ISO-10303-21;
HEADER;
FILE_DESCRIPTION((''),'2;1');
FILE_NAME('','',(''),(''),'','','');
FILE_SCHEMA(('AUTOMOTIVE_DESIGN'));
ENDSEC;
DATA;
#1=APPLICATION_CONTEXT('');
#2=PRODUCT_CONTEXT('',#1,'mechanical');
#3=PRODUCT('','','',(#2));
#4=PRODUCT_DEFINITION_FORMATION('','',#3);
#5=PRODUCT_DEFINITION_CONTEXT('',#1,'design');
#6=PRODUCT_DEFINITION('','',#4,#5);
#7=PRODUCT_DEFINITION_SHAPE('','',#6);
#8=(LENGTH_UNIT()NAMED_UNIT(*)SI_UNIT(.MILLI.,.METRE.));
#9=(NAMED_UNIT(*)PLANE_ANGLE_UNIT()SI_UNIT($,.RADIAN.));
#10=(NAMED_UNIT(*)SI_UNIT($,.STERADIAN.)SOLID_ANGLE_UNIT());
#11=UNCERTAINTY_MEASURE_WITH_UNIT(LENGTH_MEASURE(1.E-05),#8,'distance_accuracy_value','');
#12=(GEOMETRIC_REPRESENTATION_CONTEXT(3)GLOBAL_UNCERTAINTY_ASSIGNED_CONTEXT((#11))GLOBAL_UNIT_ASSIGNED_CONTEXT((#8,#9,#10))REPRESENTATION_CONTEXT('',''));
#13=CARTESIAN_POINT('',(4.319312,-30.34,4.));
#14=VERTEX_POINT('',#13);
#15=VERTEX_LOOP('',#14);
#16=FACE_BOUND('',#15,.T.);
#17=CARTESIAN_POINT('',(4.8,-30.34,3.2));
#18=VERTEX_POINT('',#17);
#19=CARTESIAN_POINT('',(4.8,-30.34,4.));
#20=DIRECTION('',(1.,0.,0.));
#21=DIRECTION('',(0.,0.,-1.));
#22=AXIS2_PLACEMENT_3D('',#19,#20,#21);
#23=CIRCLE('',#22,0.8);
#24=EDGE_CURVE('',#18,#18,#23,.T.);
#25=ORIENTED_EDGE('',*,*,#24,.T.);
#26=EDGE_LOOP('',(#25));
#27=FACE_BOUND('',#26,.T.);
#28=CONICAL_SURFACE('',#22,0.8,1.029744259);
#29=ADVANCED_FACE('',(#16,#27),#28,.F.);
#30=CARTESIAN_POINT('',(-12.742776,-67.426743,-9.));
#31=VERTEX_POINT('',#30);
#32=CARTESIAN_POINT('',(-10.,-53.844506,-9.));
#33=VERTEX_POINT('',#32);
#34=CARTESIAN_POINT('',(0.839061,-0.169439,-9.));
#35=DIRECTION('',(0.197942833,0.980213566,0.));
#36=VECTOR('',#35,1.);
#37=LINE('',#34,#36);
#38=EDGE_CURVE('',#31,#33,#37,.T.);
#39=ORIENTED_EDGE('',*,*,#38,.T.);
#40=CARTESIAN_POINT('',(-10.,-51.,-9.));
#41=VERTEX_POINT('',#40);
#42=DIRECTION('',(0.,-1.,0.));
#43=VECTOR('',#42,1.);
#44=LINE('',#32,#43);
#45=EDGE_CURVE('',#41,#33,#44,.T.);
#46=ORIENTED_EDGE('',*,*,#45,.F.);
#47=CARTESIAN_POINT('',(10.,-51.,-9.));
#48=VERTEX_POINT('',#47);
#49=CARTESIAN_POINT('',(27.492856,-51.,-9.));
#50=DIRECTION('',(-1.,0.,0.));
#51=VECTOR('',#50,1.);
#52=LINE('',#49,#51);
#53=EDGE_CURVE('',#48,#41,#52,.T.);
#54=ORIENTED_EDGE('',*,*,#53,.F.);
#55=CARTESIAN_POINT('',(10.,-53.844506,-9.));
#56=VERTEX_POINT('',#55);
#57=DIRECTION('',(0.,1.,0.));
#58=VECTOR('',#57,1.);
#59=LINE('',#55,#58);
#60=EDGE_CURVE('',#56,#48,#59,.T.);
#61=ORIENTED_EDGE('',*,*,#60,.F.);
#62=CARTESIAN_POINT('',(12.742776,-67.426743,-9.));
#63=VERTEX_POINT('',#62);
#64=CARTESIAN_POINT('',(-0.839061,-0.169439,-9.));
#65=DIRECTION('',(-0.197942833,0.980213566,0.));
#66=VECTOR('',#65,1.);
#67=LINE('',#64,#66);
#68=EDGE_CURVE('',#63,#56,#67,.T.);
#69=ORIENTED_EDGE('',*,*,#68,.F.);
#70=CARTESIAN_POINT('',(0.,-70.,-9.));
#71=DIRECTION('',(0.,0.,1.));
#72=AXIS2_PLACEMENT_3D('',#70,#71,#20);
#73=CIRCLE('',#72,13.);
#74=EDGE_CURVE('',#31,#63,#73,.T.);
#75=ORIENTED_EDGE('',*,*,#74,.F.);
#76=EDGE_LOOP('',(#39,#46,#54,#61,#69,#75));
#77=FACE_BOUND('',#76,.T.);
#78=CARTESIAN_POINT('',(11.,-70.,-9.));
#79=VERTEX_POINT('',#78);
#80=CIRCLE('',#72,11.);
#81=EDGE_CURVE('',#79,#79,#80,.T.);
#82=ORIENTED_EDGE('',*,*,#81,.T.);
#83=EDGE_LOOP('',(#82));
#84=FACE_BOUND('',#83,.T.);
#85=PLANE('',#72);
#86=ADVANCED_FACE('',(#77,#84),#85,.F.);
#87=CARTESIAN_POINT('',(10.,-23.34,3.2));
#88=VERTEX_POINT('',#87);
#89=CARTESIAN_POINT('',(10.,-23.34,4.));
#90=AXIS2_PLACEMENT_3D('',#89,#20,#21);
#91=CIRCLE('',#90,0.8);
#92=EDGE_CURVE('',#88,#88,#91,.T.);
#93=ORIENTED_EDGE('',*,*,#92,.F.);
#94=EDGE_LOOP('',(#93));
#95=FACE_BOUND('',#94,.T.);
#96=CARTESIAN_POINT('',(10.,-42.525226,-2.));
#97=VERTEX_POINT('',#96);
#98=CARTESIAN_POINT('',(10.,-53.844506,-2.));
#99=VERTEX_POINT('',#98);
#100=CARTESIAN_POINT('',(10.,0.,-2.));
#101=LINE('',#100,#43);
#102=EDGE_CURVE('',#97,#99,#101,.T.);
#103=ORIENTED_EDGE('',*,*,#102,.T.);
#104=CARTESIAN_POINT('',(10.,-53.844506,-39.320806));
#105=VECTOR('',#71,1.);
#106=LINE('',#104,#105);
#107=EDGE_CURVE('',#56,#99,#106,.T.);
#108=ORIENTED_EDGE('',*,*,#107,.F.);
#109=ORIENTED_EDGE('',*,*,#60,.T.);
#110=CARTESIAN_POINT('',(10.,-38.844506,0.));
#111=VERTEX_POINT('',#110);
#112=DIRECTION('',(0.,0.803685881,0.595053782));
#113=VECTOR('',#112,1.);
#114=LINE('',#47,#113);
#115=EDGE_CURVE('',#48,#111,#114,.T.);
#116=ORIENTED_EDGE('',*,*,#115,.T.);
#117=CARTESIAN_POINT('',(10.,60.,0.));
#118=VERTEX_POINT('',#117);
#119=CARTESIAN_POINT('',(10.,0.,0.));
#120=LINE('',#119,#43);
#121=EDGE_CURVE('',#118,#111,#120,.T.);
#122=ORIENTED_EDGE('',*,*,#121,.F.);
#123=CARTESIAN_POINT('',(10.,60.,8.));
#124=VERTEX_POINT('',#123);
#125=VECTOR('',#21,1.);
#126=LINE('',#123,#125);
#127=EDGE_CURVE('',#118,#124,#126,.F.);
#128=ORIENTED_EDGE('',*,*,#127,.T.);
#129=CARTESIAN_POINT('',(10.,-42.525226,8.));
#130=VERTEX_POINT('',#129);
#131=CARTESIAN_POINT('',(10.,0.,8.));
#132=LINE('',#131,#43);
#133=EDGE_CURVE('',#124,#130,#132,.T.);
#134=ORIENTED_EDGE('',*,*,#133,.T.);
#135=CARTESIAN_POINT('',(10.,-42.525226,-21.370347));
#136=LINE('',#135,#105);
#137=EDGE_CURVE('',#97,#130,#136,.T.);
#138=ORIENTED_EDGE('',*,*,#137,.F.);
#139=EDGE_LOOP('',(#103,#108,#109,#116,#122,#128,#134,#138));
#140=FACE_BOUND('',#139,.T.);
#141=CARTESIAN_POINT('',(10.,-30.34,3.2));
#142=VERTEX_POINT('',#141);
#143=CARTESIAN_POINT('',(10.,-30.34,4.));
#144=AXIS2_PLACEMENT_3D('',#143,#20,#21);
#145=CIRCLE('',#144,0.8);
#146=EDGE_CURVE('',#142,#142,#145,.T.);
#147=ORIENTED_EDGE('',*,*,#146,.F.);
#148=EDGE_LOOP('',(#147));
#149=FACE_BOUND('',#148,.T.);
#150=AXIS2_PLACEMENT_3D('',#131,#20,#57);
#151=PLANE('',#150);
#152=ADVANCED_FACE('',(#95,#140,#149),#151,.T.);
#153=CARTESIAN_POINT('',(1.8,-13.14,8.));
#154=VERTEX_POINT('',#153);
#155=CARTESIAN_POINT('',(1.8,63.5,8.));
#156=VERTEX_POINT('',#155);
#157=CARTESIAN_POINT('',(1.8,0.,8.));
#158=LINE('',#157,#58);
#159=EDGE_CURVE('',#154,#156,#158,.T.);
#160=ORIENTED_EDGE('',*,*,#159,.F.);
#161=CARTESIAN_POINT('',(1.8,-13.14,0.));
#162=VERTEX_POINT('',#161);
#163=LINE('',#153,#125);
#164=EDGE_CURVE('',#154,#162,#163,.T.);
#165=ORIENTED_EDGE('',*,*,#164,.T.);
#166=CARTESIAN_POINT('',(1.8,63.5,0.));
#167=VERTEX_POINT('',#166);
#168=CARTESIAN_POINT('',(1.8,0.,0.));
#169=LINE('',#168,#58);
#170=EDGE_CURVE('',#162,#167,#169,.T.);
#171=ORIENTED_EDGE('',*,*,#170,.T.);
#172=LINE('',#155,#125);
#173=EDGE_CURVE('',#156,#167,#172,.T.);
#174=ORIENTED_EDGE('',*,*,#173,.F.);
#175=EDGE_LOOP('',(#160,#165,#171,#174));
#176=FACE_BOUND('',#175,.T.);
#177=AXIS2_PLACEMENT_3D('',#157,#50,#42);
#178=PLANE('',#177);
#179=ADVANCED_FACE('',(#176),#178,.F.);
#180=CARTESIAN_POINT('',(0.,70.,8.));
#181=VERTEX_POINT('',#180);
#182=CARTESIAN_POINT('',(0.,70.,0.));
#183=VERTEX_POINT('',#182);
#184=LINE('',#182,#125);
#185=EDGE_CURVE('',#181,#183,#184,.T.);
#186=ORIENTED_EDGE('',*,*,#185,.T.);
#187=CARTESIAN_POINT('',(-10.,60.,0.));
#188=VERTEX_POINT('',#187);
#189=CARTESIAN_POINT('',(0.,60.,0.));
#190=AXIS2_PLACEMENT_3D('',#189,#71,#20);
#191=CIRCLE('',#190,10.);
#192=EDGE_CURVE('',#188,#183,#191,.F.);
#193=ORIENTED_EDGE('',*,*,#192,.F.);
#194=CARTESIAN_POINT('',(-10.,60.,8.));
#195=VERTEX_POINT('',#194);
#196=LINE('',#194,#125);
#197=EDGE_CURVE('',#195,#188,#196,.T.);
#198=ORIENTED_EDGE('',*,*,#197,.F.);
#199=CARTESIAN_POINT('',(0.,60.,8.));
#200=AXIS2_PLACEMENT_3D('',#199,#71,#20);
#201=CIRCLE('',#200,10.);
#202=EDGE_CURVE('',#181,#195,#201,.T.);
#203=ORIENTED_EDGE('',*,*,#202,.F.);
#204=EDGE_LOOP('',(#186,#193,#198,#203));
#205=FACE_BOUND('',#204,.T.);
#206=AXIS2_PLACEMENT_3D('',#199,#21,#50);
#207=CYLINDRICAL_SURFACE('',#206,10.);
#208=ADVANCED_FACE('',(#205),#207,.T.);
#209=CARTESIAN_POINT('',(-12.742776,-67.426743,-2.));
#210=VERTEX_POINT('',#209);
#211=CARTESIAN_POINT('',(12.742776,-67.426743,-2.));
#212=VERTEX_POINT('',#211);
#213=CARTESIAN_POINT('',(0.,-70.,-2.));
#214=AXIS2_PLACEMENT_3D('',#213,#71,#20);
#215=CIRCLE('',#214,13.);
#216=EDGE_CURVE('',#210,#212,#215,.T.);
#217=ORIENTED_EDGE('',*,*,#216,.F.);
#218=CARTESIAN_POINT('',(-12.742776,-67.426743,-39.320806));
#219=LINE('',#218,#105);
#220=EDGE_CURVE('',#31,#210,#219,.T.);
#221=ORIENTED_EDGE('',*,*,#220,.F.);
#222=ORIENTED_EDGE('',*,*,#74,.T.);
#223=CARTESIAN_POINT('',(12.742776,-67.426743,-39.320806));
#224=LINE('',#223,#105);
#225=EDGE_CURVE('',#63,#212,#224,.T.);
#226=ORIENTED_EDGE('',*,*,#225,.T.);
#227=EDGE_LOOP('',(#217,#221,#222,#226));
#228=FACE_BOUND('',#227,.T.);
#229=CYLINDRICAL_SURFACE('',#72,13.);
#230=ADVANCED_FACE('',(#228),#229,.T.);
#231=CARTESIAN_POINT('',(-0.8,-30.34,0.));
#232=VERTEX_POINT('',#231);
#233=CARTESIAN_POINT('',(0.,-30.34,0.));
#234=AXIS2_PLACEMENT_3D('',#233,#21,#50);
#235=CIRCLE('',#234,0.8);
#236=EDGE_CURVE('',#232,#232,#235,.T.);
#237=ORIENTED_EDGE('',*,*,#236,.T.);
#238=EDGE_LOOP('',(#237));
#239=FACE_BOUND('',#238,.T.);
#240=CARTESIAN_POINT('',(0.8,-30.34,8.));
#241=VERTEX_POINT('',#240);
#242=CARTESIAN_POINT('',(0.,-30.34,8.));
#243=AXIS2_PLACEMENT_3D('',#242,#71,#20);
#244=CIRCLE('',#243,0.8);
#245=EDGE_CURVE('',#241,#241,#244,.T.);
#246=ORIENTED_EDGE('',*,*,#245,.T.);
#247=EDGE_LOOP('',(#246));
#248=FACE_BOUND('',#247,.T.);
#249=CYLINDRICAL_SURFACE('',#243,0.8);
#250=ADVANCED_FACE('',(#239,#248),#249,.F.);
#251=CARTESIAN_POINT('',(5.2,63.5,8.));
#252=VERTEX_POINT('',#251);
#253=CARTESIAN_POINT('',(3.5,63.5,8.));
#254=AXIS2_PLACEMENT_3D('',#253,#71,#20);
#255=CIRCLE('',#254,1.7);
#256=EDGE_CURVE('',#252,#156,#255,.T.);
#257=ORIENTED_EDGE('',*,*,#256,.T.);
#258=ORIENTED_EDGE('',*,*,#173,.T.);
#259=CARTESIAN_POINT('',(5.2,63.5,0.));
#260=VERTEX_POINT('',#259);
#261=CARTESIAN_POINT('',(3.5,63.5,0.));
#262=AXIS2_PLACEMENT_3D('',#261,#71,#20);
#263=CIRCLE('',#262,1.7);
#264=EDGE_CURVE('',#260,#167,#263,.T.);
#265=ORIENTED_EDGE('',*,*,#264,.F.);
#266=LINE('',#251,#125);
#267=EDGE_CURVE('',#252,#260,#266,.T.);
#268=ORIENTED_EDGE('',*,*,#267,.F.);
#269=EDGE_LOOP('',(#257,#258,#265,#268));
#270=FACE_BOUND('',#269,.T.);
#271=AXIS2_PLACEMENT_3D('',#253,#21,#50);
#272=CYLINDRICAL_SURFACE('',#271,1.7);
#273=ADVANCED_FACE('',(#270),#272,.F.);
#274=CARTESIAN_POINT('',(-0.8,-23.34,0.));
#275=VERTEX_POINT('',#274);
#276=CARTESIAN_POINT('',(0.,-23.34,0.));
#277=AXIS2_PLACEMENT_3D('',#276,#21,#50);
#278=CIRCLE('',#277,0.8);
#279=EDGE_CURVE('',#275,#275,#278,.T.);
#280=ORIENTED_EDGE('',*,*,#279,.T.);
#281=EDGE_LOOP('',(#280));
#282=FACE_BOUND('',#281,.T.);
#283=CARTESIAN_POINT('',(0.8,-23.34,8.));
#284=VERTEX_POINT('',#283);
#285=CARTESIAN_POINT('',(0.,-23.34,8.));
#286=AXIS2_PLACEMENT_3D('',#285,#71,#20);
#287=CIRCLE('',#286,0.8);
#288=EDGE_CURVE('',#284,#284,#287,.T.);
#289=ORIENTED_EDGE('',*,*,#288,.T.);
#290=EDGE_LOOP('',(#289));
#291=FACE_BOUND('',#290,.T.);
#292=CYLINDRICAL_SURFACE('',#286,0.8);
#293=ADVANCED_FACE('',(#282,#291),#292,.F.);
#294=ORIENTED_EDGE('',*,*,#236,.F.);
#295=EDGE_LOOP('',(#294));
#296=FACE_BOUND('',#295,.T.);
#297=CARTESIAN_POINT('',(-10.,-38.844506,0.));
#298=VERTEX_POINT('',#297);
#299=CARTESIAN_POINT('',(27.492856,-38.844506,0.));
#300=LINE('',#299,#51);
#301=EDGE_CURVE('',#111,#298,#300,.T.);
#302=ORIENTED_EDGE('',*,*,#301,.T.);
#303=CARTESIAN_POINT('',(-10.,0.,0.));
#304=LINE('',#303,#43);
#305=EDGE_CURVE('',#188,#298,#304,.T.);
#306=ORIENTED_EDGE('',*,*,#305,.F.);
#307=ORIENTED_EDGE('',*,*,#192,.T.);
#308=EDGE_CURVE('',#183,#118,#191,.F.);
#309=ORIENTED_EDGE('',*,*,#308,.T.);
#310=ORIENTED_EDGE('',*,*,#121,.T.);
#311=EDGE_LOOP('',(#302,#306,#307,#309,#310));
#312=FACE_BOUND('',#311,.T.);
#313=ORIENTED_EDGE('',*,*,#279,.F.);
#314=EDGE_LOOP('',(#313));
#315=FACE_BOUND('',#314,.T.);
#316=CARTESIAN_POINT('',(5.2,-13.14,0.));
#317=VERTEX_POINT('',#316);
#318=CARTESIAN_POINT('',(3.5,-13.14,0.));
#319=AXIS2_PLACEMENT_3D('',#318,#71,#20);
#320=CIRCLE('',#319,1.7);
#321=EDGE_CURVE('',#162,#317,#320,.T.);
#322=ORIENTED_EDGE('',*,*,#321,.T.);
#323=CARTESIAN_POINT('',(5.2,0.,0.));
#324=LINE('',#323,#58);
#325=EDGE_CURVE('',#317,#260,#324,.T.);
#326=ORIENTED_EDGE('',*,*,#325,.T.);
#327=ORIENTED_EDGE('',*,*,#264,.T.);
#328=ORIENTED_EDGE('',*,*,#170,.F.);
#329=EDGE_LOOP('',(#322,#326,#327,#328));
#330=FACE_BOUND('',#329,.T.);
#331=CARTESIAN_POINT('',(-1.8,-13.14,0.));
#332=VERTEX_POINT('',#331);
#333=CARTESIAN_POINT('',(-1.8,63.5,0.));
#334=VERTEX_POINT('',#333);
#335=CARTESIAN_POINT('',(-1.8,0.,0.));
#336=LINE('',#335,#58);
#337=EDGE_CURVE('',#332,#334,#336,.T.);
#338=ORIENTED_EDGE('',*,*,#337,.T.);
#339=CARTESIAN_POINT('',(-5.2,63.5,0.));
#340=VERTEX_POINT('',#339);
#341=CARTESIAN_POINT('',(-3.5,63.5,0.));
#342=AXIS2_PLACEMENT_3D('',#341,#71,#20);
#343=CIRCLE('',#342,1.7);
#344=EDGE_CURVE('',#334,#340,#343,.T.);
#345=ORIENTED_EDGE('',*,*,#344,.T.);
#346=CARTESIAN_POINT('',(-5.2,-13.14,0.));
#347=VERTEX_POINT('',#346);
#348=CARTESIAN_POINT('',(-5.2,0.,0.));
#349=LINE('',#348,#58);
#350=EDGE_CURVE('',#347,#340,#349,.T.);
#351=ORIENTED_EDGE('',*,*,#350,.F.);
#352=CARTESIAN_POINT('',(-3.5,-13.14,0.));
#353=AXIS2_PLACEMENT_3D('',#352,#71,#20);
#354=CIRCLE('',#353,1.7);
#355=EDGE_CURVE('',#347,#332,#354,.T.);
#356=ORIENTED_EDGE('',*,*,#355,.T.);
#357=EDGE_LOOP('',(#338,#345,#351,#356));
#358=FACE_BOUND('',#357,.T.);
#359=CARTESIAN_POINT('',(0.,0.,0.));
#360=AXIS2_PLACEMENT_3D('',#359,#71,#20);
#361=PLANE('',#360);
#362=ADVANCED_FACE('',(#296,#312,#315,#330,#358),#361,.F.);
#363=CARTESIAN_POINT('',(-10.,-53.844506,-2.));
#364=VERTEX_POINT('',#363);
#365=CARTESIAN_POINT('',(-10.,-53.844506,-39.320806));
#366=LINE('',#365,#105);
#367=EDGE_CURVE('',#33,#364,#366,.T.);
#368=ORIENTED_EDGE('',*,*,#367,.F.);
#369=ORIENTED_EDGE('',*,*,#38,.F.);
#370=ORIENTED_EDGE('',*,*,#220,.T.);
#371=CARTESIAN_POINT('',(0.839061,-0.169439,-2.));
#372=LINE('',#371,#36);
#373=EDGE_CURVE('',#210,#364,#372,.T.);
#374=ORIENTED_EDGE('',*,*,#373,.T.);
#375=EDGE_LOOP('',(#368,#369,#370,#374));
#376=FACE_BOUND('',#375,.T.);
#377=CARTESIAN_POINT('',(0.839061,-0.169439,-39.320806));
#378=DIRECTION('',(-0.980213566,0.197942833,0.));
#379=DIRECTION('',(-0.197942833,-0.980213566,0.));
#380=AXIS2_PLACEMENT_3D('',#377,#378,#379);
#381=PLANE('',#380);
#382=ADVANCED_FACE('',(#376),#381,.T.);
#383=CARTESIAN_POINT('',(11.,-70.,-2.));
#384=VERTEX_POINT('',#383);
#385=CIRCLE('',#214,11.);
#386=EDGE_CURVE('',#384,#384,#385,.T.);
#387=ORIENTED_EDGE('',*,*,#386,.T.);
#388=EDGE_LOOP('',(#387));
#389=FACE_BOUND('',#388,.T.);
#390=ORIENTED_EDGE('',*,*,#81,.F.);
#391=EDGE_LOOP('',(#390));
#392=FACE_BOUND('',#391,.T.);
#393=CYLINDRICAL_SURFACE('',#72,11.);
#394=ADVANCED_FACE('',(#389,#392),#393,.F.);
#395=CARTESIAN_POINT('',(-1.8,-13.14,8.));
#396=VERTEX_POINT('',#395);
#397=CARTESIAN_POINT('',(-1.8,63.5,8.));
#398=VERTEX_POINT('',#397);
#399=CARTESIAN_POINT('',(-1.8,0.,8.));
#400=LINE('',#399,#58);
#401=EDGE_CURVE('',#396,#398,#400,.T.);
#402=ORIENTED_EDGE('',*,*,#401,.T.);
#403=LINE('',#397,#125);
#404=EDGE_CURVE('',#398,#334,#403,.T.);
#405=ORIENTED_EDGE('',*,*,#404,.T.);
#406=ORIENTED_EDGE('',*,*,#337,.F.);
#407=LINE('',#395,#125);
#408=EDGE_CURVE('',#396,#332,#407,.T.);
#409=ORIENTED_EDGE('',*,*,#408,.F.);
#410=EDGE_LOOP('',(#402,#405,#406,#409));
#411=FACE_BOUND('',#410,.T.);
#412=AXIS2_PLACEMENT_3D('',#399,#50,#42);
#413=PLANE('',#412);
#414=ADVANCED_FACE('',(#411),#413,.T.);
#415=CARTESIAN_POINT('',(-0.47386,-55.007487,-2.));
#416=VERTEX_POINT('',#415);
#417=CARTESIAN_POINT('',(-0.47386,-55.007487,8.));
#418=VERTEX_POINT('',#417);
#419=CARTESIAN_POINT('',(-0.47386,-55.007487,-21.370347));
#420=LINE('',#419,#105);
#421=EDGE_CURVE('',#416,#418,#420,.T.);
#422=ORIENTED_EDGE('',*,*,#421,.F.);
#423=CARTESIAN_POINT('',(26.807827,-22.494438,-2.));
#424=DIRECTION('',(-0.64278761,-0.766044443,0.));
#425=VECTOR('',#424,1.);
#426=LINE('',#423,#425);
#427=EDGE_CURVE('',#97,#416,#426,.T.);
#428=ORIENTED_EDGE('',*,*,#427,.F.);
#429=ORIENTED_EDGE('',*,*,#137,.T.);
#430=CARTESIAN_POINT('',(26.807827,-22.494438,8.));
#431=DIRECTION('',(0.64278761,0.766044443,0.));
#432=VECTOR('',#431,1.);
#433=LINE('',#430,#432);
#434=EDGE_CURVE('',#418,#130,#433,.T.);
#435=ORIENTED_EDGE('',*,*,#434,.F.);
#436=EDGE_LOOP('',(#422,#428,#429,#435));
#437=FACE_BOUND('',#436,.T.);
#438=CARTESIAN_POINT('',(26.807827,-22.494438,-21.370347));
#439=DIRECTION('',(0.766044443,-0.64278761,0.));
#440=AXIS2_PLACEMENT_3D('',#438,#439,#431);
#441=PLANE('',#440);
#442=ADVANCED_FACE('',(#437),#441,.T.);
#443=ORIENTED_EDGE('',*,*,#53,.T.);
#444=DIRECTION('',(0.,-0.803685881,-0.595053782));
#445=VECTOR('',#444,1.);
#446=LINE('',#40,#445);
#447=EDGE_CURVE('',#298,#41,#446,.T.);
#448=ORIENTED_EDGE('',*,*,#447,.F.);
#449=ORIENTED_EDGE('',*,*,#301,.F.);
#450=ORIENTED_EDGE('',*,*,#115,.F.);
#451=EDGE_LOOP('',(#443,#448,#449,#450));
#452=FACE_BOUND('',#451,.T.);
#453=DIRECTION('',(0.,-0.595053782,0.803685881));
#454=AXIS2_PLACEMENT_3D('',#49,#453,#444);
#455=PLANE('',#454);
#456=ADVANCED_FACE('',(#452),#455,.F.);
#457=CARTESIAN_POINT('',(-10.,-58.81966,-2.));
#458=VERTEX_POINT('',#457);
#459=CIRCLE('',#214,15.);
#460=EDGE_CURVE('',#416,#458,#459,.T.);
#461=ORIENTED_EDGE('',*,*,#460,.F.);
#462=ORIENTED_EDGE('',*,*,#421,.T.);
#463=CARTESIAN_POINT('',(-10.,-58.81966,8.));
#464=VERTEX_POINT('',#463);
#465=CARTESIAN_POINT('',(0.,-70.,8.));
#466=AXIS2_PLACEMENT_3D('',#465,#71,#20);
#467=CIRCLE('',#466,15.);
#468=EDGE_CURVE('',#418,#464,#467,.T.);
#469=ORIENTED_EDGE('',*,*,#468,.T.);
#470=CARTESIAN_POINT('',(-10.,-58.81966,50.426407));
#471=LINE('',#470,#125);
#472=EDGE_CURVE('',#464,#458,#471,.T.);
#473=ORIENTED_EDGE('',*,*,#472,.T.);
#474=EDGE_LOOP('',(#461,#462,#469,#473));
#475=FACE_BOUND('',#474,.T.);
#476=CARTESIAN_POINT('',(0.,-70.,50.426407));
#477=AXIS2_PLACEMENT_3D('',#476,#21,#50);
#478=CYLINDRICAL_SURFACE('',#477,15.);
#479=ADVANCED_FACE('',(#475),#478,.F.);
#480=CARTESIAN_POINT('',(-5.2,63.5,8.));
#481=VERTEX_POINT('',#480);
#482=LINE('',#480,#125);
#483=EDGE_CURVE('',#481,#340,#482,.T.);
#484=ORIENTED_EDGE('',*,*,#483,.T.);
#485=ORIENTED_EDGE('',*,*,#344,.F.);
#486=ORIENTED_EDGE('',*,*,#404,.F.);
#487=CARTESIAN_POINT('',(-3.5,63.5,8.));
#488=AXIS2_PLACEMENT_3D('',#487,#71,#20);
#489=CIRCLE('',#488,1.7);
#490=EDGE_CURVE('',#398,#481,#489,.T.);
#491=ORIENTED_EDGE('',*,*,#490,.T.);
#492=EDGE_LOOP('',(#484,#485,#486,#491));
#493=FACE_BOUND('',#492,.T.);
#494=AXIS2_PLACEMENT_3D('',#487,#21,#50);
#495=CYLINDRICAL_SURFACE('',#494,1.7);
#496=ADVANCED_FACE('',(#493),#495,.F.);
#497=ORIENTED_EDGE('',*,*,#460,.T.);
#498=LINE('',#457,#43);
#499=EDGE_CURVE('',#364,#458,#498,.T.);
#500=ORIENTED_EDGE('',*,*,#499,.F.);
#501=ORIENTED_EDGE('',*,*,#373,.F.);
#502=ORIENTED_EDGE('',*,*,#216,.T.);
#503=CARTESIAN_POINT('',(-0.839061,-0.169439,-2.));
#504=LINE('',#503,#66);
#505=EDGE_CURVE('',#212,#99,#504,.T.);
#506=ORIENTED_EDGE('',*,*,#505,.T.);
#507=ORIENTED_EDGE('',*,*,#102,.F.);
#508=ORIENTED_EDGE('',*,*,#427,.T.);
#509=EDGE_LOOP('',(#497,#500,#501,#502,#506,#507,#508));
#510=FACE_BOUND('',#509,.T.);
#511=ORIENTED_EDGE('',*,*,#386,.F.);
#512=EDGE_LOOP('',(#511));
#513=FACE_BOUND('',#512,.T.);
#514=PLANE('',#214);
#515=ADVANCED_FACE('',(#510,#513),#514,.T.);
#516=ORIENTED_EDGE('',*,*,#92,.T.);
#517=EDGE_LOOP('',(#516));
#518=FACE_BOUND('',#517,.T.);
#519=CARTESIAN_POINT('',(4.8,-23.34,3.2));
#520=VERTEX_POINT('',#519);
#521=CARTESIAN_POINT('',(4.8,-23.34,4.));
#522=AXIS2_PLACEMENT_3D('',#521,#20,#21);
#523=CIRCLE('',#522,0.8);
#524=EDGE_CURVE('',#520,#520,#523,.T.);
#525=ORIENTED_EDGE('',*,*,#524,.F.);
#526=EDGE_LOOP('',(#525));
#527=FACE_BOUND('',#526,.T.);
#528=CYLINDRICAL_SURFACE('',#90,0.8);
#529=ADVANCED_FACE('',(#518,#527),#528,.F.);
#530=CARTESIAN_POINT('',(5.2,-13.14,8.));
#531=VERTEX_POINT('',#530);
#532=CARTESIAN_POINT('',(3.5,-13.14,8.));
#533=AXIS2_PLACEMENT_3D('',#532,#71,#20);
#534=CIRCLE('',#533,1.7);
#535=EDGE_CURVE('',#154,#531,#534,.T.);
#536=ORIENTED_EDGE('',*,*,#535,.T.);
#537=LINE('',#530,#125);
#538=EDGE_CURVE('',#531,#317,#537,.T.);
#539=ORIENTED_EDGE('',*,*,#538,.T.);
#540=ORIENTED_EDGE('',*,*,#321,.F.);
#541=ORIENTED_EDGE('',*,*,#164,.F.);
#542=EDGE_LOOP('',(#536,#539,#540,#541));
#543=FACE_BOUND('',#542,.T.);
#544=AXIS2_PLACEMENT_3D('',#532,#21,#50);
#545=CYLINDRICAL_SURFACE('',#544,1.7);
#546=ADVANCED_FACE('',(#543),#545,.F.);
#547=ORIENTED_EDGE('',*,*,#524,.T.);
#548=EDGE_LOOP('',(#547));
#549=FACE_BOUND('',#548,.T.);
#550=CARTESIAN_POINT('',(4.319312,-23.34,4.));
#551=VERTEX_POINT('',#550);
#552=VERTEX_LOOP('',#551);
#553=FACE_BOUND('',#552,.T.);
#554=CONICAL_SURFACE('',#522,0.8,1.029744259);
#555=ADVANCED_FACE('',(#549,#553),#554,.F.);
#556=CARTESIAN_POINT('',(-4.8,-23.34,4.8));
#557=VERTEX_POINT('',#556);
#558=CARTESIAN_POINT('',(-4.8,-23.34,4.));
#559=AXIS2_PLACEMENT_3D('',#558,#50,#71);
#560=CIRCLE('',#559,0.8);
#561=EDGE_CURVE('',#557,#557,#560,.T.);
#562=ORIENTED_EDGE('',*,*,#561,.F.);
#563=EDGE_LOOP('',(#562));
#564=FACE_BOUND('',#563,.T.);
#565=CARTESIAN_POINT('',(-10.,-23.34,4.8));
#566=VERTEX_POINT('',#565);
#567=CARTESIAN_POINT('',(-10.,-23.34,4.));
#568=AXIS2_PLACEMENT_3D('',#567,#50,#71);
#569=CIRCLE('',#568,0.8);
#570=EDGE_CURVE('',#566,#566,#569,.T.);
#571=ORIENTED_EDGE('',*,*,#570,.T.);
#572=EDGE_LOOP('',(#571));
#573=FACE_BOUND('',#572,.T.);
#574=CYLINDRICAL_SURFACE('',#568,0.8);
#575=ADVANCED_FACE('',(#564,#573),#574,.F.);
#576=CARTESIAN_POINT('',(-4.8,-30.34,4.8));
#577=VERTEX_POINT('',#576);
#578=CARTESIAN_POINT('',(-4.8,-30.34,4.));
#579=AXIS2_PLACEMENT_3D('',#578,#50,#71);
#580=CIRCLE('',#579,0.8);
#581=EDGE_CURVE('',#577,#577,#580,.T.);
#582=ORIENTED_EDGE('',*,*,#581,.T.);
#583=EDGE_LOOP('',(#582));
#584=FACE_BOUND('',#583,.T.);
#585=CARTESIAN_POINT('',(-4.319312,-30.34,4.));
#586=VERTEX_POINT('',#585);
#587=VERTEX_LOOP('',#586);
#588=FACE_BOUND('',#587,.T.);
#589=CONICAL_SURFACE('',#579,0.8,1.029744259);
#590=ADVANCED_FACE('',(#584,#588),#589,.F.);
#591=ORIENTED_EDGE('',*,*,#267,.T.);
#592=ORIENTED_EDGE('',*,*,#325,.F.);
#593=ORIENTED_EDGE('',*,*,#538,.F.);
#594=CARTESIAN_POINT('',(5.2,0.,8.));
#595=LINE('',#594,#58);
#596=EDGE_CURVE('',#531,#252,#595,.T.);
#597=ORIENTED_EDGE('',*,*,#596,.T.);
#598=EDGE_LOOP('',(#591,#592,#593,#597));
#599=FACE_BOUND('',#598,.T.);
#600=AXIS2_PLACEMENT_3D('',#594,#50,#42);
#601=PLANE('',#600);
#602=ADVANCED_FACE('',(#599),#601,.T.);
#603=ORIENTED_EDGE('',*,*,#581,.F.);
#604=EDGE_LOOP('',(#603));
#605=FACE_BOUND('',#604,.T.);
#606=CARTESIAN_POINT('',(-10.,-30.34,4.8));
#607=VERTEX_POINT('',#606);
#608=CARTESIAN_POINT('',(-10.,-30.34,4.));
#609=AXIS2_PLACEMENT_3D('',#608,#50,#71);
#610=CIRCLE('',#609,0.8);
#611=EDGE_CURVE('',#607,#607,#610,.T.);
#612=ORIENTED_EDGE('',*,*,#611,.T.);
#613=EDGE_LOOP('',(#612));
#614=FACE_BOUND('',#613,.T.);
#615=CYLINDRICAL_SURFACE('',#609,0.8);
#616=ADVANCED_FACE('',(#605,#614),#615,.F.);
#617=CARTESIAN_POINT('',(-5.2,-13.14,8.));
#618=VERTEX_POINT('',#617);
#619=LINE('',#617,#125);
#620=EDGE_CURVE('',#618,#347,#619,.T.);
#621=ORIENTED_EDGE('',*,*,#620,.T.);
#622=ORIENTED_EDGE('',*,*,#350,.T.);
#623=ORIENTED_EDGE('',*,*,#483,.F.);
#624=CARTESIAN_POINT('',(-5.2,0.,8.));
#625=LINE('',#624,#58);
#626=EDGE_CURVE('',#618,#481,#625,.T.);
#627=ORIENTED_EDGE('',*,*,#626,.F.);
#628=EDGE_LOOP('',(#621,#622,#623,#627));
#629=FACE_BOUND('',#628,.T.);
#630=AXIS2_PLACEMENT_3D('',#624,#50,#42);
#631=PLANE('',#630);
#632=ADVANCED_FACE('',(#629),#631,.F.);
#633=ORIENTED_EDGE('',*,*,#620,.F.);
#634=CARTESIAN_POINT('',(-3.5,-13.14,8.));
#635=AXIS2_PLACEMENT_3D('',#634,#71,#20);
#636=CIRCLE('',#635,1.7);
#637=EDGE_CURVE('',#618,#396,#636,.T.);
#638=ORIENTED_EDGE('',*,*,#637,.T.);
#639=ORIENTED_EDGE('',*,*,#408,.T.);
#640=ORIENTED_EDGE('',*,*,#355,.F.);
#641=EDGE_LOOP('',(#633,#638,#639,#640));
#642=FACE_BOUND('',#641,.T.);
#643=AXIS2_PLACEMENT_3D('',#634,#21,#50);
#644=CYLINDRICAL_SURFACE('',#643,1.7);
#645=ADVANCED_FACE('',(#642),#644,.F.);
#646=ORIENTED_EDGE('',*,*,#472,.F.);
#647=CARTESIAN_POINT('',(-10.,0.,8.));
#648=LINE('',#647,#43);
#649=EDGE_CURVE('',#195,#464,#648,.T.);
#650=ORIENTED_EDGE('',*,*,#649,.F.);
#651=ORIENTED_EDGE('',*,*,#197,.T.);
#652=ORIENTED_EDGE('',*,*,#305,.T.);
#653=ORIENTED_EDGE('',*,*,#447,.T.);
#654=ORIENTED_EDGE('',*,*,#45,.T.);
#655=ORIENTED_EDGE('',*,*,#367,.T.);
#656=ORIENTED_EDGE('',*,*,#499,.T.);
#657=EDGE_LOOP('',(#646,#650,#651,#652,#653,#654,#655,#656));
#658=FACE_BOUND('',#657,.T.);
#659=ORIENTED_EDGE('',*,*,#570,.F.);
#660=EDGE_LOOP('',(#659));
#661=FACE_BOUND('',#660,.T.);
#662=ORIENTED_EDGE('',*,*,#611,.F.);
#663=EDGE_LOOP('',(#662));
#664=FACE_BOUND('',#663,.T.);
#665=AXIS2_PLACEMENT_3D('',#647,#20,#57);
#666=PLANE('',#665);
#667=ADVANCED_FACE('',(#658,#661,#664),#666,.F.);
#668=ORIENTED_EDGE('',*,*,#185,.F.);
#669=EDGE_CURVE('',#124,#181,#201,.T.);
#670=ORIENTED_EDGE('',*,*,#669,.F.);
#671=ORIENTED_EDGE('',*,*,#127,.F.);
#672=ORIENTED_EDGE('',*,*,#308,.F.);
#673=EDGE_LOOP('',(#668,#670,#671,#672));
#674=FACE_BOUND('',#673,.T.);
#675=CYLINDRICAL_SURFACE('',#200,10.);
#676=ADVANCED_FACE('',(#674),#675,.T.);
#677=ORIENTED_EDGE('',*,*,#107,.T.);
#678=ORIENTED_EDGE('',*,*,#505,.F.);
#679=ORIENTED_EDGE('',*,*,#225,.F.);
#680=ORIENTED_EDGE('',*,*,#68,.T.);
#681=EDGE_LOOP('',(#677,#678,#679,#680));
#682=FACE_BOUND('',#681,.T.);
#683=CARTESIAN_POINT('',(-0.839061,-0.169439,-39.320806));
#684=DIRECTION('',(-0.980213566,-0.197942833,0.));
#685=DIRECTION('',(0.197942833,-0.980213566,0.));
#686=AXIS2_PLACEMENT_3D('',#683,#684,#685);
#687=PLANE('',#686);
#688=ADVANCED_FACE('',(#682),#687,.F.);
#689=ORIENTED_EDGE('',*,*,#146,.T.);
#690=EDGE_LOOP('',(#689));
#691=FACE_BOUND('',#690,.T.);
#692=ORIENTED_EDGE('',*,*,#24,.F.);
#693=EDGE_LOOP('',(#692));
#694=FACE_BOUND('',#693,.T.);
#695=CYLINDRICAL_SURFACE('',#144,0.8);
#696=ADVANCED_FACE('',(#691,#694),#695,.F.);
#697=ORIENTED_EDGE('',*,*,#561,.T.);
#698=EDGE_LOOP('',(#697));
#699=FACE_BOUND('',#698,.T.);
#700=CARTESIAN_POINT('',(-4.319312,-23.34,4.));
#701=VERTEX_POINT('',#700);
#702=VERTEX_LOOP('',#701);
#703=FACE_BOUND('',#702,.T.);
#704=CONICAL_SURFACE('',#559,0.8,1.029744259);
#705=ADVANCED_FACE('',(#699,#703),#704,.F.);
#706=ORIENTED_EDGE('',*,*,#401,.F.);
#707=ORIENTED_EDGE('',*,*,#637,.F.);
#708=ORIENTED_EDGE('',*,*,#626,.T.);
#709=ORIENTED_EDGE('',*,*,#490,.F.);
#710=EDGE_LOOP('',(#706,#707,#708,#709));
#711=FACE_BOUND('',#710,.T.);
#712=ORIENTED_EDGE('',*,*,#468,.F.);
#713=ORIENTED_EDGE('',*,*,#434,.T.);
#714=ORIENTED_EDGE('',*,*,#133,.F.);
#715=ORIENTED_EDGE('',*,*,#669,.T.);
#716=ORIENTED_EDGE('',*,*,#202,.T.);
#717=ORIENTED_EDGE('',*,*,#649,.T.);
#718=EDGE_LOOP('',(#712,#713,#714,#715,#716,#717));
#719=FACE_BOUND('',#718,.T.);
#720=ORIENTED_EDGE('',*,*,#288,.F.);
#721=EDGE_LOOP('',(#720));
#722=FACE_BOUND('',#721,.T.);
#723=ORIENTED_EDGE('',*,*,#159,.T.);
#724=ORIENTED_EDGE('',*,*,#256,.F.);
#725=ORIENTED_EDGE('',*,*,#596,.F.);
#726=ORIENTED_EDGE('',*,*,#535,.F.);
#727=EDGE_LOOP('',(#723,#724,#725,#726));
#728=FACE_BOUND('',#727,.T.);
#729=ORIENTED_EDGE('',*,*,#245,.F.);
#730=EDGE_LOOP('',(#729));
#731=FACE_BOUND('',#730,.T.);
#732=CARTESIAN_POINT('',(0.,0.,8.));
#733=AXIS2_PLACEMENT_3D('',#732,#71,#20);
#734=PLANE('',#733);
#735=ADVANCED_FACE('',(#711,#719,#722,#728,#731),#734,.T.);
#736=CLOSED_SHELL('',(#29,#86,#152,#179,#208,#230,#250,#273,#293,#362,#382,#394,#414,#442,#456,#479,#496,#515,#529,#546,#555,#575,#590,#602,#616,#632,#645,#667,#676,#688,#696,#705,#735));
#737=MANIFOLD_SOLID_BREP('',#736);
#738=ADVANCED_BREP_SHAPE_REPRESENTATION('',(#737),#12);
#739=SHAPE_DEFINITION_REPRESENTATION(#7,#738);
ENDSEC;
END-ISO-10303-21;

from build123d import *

# Parameters (mm, degrees)
SKETCH1_W                             = 140
SKETCH1_H                             = 20
BOSS_EXTRUDE1_DEPTH                   = 8
FILLET1_R                             = 10
TOP_SCREW_HOLES_AT_2_COUNT            = 2
TOP_SCREW_HOLES_AT_2_PITCH            = 7
SIDE_SCREW_HOLES_AT_2_COUNT           = 2
SIDE_SCREW_HOLES_AT_2_PITCH           = 7
BOSS_EXTRUDE2_START                   = -6
SKETCH23_R                            = 13
SKETCH23_R_2                          = 11
BOSS_EXTRUDE2_DEPTH                   = 7
CUT_EXTRUDE1_DEPTH                    = 4.5
CUT_EXTRUDE1_DEPTH_BACK               = 4.5
SKETCH23_4_R                          = 11
CUT_EXTRUDE2_START                    = -4
SKETCH23_5_R                          = 13
SKETCH23_5_R_2                        = 11
CUT_EXTRUDE2_DEPTH                    = 8
BOSS_EXTRUDE7_DEPTH                   = 9
CUT_EXTRUDE3_DEPTH                    = 11
CUT_EXTRUDE4_START                    = -2
CUT_EXTRUDE4_DEPTH                    = 2
BOSS_EXTRUDE3_START                   = -13
SKETCH24_R                            = 4
BOSS_EXTRUDE3_DEPTH                   = 9
BOSS_EXTRUDE4_START                   = -8
SKETCH25_R                            = 13
BOSS_EXTRUDE4_DEPTH                   = 8
SKETCH34_R                            = 5
BOSS_EXTRUDE9_DEPTH                   = 4
SKETCH39_R                            = 5
SKETCH39_R_2                          = 1.7
BOSS_EXTRUDE10_DEPTH                  = 2
BODY_MOVE_COPY1_OUTLINE_R             = 0.8
BODY_MOVE_COPY1_DEPTH                 = 3.1999999
BODY_MOVE_COPY1_START                 = 4.8000001
BODY_MOVE_COPY1_2_OUTLINE_R           = 0.8
BODY_MOVE_COPY1_2_DEPTH               = 3.1999999
BODY_MOVE_COPY1_START_2               = -9
BODY_MOVE_COPY1_3_OUTLINE_R           = 11
BODY_MOVE_COPY1_3_DEPTH               = 7
BODY_MOVE_COPY1_START_3               = -2
BODY_MOVE_COPY1_4_DEPTH               = 10
BODY_MOVE_COPY1_START_4               = 3.1999999
BODY_MOVE_COPY1_5_OUTLINE_R           = 0.8
BODY_MOVE_COPY1_5_DEPTH               = 1.6000002
CUT_EXTRUDE5_DEPTH                    = 9
BOSS_EXTRUDE11_DEPTH                  = 8
BOSS_EXTRUDE13_REACH                  = 87.012
BOSS_EXTRUDE13_DIRECTION_2_REACH      = 87.012
CUT_EXTRUDE6_DEPTH                    = 2.6
CUT_EXTRUDE7_START                    = -10
CUT_EXTRUDE7_DEPTH                    = 10
BODY_MOVE_COPY3_ANGLE                 = 170
BOSS_EXTRUDE14_REACH                  = 212.931
SKETCH46_W                            = 8.790313744
SKETCH46_H                            = 8
BOSS_EXTRUDE14_DIRECTION_2_REACH      = 212.931
BOSS_EXTRUDE14_DIRECTION_2_END_RADIUS = 13
BODY_MOVE_COPY4_ANGLE                 = 10


with BuildPart() as part:
    # Sketch1 → Boss-Extrude1 (new body)
    with BuildSketch(Plane(origin=(0, 0, 0), x_dir=(0, 1, 0), z_dir=(0, 0, 1))):
        Rectangle(SKETCH1_W, SKETCH1_H)
        with BuildLine():
            Line((-13.14, 5.2), (63.5, 5.2))
            ThreePointArc((63.5, 5.2), (65.2, 3.5), (63.5, 1.8))
            Line((63.5, 1.8), (-13.14, 1.8))
            ThreePointArc((-13.14, 1.8), (-14.84, 3.5), (-13.14, 5.2))
        make_face(mode=Mode.SUBTRACT)
        with BuildLine():
            Line((-13.14, -1.8), (63.5, -1.8))
            ThreePointArc((63.5, -1.8), (65.2, -3.5), (63.5, -5.2))
            Line((63.5, -5.2), (-13.14, -5.2))
            ThreePointArc((-13.14, -5.2), (-14.84, -3.5), (-13.14, -1.8))
        make_face(mode=Mode.SUBTRACT)
    extrude(amount=BOSS_EXTRUDE1_DEPTH)

    # Fillet1
    fillet1_edges = [part.edges().sort_by_distance(p)[0] for p in [
        (-10, 70, 4),
        (10, 70, 4),
    ]]
    fillet(fillet1_edges, radius=FILLET1_R - 0.0001)  # a hair under: the kernel refuses the full size

    # Sketch19 → Top - Screw Holes (revolve, cut)
    with BuildSketch(Plane(origin=(0, -23.34, 8), x_dir=(0, -1, 0), z_dir=(1, 0, 0))):
        Polygon((0, 0), (0, 5.680688495), (0.8, 5.2), (0.8, 0), align=None)
    top_screw_holes = revolve(axis=Axis((0, -23.34, 14.35), (0, 0, -1)), mode=Mode.SUBTRACT)

    # Top - Screw Holes at 2: Top - Screw Holes ×2
    with Locations(*[(0, -i * TOP_SCREW_HOLES_AT_2_PITCH, 0) for i in range(1, TOP_SCREW_HOLES_AT_2_COUNT)]):
        add(top_screw_holes, mode=Mode.SUBTRACT)

    # Sketch21 → Side - Screw Holes (revolve, cut)
    with BuildSketch(Plane(origin=(-10, -23.34, 4), x_dir=(0, 0, 1), z_dir=(0, 1, 0))):
        Polygon((0, 0), (0, 5.680688495), (0.8, 5.2), (0.8, 0), align=None)
    side_screw_holes = revolve(axis=Axis((-16.35, -23.34, 4), (1, 0, 0)), mode=Mode.SUBTRACT)

    # Side - Screw Holes at 2: Side - Screw Holes ×2
    with Locations(*[(0, -i * SIDE_SCREW_HOLES_AT_2_PITCH, 0) for i in range(1, SIDE_SCREW_HOLES_AT_2_COUNT)]):
        add(side_screw_holes, mode=Mode.SUBTRACT)

    # Mirror1: Side - Screw Holes across plane
    add(side_screw_holes.mirror(Plane(origin=(0, 0, 0), x_dir=(0, 0, 1), z_dir=(1, 0, 0))), mode=Mode.SUBTRACT)

    # Mirror1 copy 1 sketch → Mirror1 copy 1 (revolve, cut)
    with BuildSketch(Plane(origin=(10, -30.34, 4), x_dir=(0, 0, 1), z_dir=(0, 1, 0))):
        Polygon((0, 0), (0, -5.680688495), (0.8, -5.2), (0.8, 0), align=None)
    revolve(axis=Axis((16.35, -30.34, 4), (1, 0, 0)), mode=Mode.SUBTRACT)

    # Mirror2: Top - Screw Holes across plane
    add(top_screw_holes.mirror(Plane.XY.offset(4)), mode=Mode.SUBTRACT)

    # Mirror2 copy 1 sketch → Mirror2 copy 1 (revolve, cut)
    with BuildSketch(Plane(origin=(0, -30.34, 0), x_dir=(0, -1, 0), z_dir=(1, 0, 0))):
        Polygon((0, 0), (0, -5.680688495), (0.8, -5.2), (0.8, 0), align=None)
    revolve(axis=Axis((0, -30.34, -6.35), (0, 0, -1)), mode=Mode.SUBTRACT)

    # Sketch23<4> → Cut-Extrude1 (cut, two sides: drawn at the far end of the back side and taken through both)
    with BuildSketch(Plane(origin=(0, 0, 4), x_dir=(0, -1, 0), z_dir=(0, 0, 1)).offset(-CUT_EXTRUDE1_DEPTH_BACK)):
        with Locations(Location((70, 0, 0), (0, 0, 90))):
            Circle(SKETCH23_4_R)
    extrude(amount=CUT_EXTRUDE1_DEPTH + CUT_EXTRUDE1_DEPTH_BACK, mode=Mode.SUBTRACT)

    # Sketch23<5> → Cut-Extrude2 (cut)
    with BuildSketch(Plane(origin=(0, 0, 4), x_dir=(0, -1, 0), z_dir=(0, 0, 1)).offset(CUT_EXTRUDE2_START)):
        with Locations(Location((70, 0, 0), (0, 0, 90))):
            Circle(SKETCH23_5_R)
        with Locations(Location((70, 0, 0), (0, 0, 90))):
            Circle(SKETCH23_5_R_2, mode=Mode.SUBTRACT)
    extrude(amount=CUT_EXTRUDE2_DEPTH, mode=Mode.SUBTRACT)



with BuildPart() as body_2:
    # Sketch23 → Boss-Extrude2 (new body)
    with BuildSketch(Plane(origin=(0, 0, 4), x_dir=(0, -1, 0), z_dir=(0, 0, 1)).offset(BOSS_EXTRUDE2_START)):
        with Locations(Location((70, 0, 0), (0, 0, 90))):
            Circle(SKETCH23_R)
        with Locations(Location((70, 0, 0), (0, 0, 90))):
            Circle(SKETCH23_R_2, mode=Mode.SUBTRACT)
    extrude(amount=-BOSS_EXTRUDE2_DEPTH)


with BuildPart() as part_1:
    add(part.part)

    add(body_2.part)  # Boss-Extrude7 merges body 2
    # Sketch29 → Boss-Extrude7 (add)
    with BuildSketch(Plane(origin=(0, 0, 0), x_dir=(1, 0, 0), z_dir=(0, 0, -1))):
        with BuildLine():
            ThreePointArc((-10, 53.844505579), (0, 51), (10, 53.844505579))
            Line((10, 53.844505579), (10, 61.693376137))
            ThreePointArc((10, 61.693376137), (0, 57), (-10, 61.693376137))
            Line((-10, 61.693376137), (-10, 53.844505579))
        make_face()
        with BuildLine():
            Line((-12.742776356, 67.426743165), (-10, 53.844505579))
            Line((-10, 53.844505579), (-10, 61.693376137))
            ThreePointArc((-10, 61.693376137), (-11.727162635, 64.389861273), (-12.742776356, 67.426743165))
        make_face()
        with BuildLine():
            Line((10, 61.693376137), (10, 53.844505579))
            Line((10, 53.844505579), (12.742776356, 67.426743165))
            ThreePointArc((12.742776356, 67.426743165), (11.727162635, 64.389861273), (10, 61.693376137))
        make_face()
    extrude(amount=BOSS_EXTRUDE7_DEPTH)

    # Cut-Extrude3: read off the stored shape, not the designer's step
    # Cut-Extrude3 outline → Cut-Extrude3 (cut)
    with BuildSketch(Plane.XY.offset(-2)):
        with BuildLine():
            ThreePointArc((11.261507826, -60.091496507), (0, -55), (-11.261507826, -60.091496507))
            Line((-11.261507826, -60.091496507), (-12.742776356, -67.426743165))
            ThreePointArc((-12.742776356, -67.426743165), (0, -57), (12.742776356, -67.426743165))
            Line((12.742776356, -67.426743165), (11.261507826, -60.091496507))
        make_face()
    extrude(amount=CUT_EXTRUDE3_DEPTH, mode=Mode.SUBTRACT)

    # Sketch30 → Cut-Extrude4 (cut)
    with BuildSketch(Plane.XY.offset(CUT_EXTRUDE4_START)):
        with BuildLine():
            Line((-10, -58.819660113), (-10, -53.844505579))
            Line((-10, -53.844505579), (-11.261507826, -60.091496507))
            ThreePointArc((-11.261507826, -60.091496507), (-10.649756838, -59.436729707), (-10, -58.819660113))
        make_face()
        with BuildLine():
            Line((11.261507826, -60.091496507), (10, -53.844505579))
            Line((10, -53.844505579), (10, -58.819660113))
            ThreePointArc((10, -58.819660113), (10.649756838, -59.436729707), (11.261507826, -60.091496507))
        make_face()
    extrude(amount=CUT_EXTRUDE4_DEPTH, mode=Mode.SUBTRACT)

    # Boss-Extrude13: up to this face of the body (flat: up to its plane)
    boss_extrude13_end = Plane(part_1.part.faces().sort_by_distance((10, 0.113380243, 3.94798514))[0])
    # Sketch43 → Boss-Extrude13 (add, up to the picked face)
    with BuildSketch(Plane.YZ, mode=Mode.PRIVATE) as boss_extrude13_sk1:
        Polygon((-51, -9), (-38.844505579, 0), (-51, 0), (-53.844505579, 0), (-53.844505579, -9), align=None)
    boss_extrude13_tool1 = split(extrude(boss_extrude13_sk1.sketch, amount=BOSS_EXTRUDE13_REACH, mode=Mode.PRIVATE), bisect_by=boss_extrude13_end, keep=Keep.BOTH, mode=Mode.PRIVATE)
    add(boss_extrude13_tool1.solids().sort_by(Axis((0, -48.693363, -3.478215), (1, 0, 0)))[0])

    # Boss-Extrude13 direction 2: up to this face of the body (flat: up to its plane)
    boss_extrude13_direction_2_end = Plane(part_1.part.faces().sort_by_distance((-10, 0.113380243, 3.94798514))[0])
    # Sketch43 → Boss-Extrude13 direction 2 (add, up to the picked face)
    with BuildSketch(Plane.YZ, mode=Mode.PRIVATE) as boss_extrude13_direction_2_sk1:
        Polygon((-51, -9), (-38.844505579, 0), (-51, 0), (-53.844505579, 0), (-53.844505579, -9), align=None)
    boss_extrude13_direction_2_tool1 = split(extrude(boss_extrude13_direction_2_sk1.sketch, amount=-BOSS_EXTRUDE13_DIRECTION_2_REACH, mode=Mode.PRIVATE), bisect_by=boss_extrude13_direction_2_end, keep=Keep.BOTH, mode=Mode.PRIVATE)
    add(boss_extrude13_direction_2_tool1.solids().sort_by(Axis((0, -48.693363, -3.478215), (-1, 0, 0)))[0])

    # Sketch45 → Cut-Extrude7 (cut)
    with BuildSketch(Plane.XY.offset(8).offset(CUT_EXTRUDE7_START)):
        with BuildLine():
            Line((10, -42.525225805), (-0.473860479, -55.00748666))
            ThreePointArc((-0.473860479, -55.00748666), (5.13030215, -55.904610688), (10, -58.819660113))
            Line((10, -58.819660113), (10, -42.525225805))
        make_face()
    extrude(amount=CUT_EXTRUDE7_DEPTH, mode=Mode.SUBTRACT)


with BuildPart() as body_2_2:
    # Sketch24 → Boss-Extrude3 (new body)
    with BuildSketch(Plane(origin=(0, 0, 4), x_dir=(0, -1, 0), z_dir=(0, 0, 1)).offset(BOSS_EXTRUDE3_START)):
        with Locations(Location((70, 0, 0), (0, 0, 90))):
            Circle(SKETCH24_R)
    extrude(amount=BOSS_EXTRUDE3_DEPTH)

    # Sketch25 → Boss-Extrude4 (add)
    with BuildSketch(Plane(origin=(0, 0, 0), x_dir=(1, 0, 0), z_dir=(0, 0, -1)).offset(BOSS_EXTRUDE4_START)):
        with Locations(Location((0, 70, 0), (0, 0, 180))):
            Circle(SKETCH25_R)
    extrude(amount=BOSS_EXTRUDE4_DEPTH)


with BuildPart() as body_3:
    # Sketch34 → Boss-Extrude9 (new body)
    with BuildSketch(Plane(origin=(0, 0, -9), x_dir=(1, 0, 0), z_dir=(0, 0, -1))):
        with Locations(Location((0, 70, 0), (0, 0, 180))):
            Circle(SKETCH34_R)
    extrude(amount=BOSS_EXTRUDE9_DEPTH)


with BuildPart() as csk_for_m3_countersunk_flat_head_screw1_tool:
    # Sketch38 → CSK for M3 Countersunk Flat Head Screw1 (revolve)
    with BuildSketch(Plane(origin=(0, -70, -13), x_dir=(0, 1, 0), z_dir=(1, 0, 0))):
        Polygon((0, 0), (0, 21), (1.7, 21), (1.7, 1.45), (3.15, 0), align=None)
    revolve(axis=Axis((0, -70, -19.35), (0, 0, 1)))


with BuildPart() as body_2_2_1:
    add(body_2_2.part)

    # CSK for M3 Countersunk Flat Head Screw1: cut by csk_for_m3_countersunk_flat_head_screw1_tool
    add(csk_for_m3_countersunk_flat_head_screw1_tool.part, mode=Mode.SUBTRACT)

    # Sketch39 → Boss-Extrude10 (add)
    with BuildSketch(Plane(origin=(0, 0, 0), x_dir=(1, 0, 0), z_dir=(0, 0, -1))):
        with Locations(Location((0, 70, 0), (0, 0, 180))):
            Circle(SKETCH39_R)
        with Locations(Location((0, 70, 0), (0, 0, 180))):
            Circle(SKETCH39_R_2, mode=Mode.SUBTRACT)
    extrude(amount=BOSS_EXTRUDE10_DEPTH)



with BuildPart() as body_3_1:
    add(body_3.part)

    # CSK for M3 Countersunk Flat Head Screw1: cut by csk_for_m3_countersunk_flat_head_screw1_tool
    add(csk_for_m3_countersunk_flat_head_screw1_tool.part, mode=Mode.SUBTRACT)


with BuildPart() as body_4:
    # Body-Move/Copy1: read off the stored shape, not the designer's step
    # Body-Move/Copy1 outline → Body-Move/Copy1 (new body)
    with BuildSketch(Plane.XY):
        with BuildLine():
            Line((10, -58.819660113), (10, 60))
            ThreePointArc((10, 60), (7.071067812, 67.071067812), (0, 70))
            ThreePointArc((0, 70), (-7.071067812, 67.071067812), (-10, 60))
            Line((-10, 60), (-10, -58.819660113))
            ThreePointArc((-10, -58.819660113), (0, -55), (10, -58.819660113))
        make_face()
        with BuildLine():
            ThreePointArc((1.8, 63.5), (3.5, 65.2), (5.2, 63.5))
            Line((5.2, 63.5), (5.2, -13.14))
            ThreePointArc((5.2, -13.14), (3.5, -14.84), (1.8, -13.14))
            Line((1.8, -13.14), (1.8, 63.5))
        make_face(mode=Mode.SUBTRACT)
        with Locations((0, -30.34)):
            Circle(BODY_MOVE_COPY1_OUTLINE_R, mode=Mode.SUBTRACT)
        with Locations((0, -23.34)):
            Circle(BODY_MOVE_COPY1_OUTLINE_R, mode=Mode.SUBTRACT)
        with BuildLine():
            Line((-5.2, -13.14), (-5.2, 63.5))
            ThreePointArc((-5.2, 63.5), (-3.5, 65.2), (-1.8, 63.5))
            Line((-1.8, 63.5), (-1.8, -13.14))
            ThreePointArc((-1.8, -13.14), (-3.5, -14.84), (-5.2, -13.14))
        make_face(mode=Mode.SUBTRACT)
    extrude(amount=BODY_MOVE_COPY1_DEPTH)

    # Body-Move_Copy1 2 outline → Body-Move_Copy1 2 (add)
    with BuildSketch(Plane.XY.offset(BODY_MOVE_COPY1_START)):
        with BuildLine():
            Line((10, -58.819660113), (10, 60))
            ThreePointArc((10, 60), (7.071067812, 67.071067812), (0, 70))
            ThreePointArc((0, 70), (-7.071067812, 67.071067812), (-10, 60))
            Line((-10, 60), (-10, -58.819660113))
            ThreePointArc((-10, -58.819660113), (0, -55), (10, -58.819660113))
        make_face()
        with BuildLine():
            ThreePointArc((1.8, 63.5), (3.5, 65.2), (5.2, 63.5))
            Line((5.2, 63.5), (5.2, -13.14))
            ThreePointArc((5.2, -13.14), (3.5, -14.84), (1.8, -13.14))
            Line((1.8, -13.14), (1.8, 63.5))
        make_face(mode=Mode.SUBTRACT)
        with Locations((0, -30.34)):
            Circle(BODY_MOVE_COPY1_2_OUTLINE_R, mode=Mode.SUBTRACT)
        with Locations((0, -23.34)):
            Circle(BODY_MOVE_COPY1_2_OUTLINE_R, mode=Mode.SUBTRACT)
        with BuildLine():
            Line((-5.2, -13.14), (-5.2, 63.5))
            ThreePointArc((-5.2, 63.5), (-3.5, 65.2), (-1.8, 63.5))
            Line((-1.8, 63.5), (-1.8, -13.14))
            ThreePointArc((-1.8, -13.14), (-3.5, -14.84), (-5.2, -13.14))
        make_face(mode=Mode.SUBTRACT)
    extrude(amount=BODY_MOVE_COPY1_2_DEPTH)

    # Body-Move_Copy1 3 outline → Body-Move_Copy1 3 (add)
    with BuildSketch(Plane.XY.offset(BODY_MOVE_COPY1_START_2)):
        with BuildLine():
            Line((12.742776356, -67.426743165), (10, -53.844505579))
            ThreePointArc((10, -53.844505579), (0, -51), (-10, -53.844505579))
            Line((-10, -53.844505579), (-12.742776356, -67.426743165))
            ThreePointArc((-12.742776356, -67.426743165), (0, -83), (12.742776356, -67.426743165))
        make_face()
        with Locations((0, -70)):
            Circle(BODY_MOVE_COPY1_3_OUTLINE_R, mode=Mode.SUBTRACT)
    extrude(amount=BODY_MOVE_COPY1_3_DEPTH)

    # Body-Move_Copy1 4 outline → Body-Move_Copy1 4 (add)
    with BuildSketch(Plane.XY.offset(BODY_MOVE_COPY1_START_3)):
        with BuildLine():
            ThreePointArc((10, -53.844505579), (0, -51), (-10, -53.844505579))
            Line((-10, -53.844505579), (-10, -58.819660113))
            ThreePointArc((-10, -58.819660113), (0, -55), (10, -58.819660113))
            Line((10, -58.819660113), (10, -53.844505579))
        make_face()
    extrude(amount=BODY_MOVE_COPY1_4_DEPTH)

    # Body-Move_Copy1 5 outline → Body-Move_Copy1 5 (add)
    with BuildSketch(Plane.XY.offset(BODY_MOVE_COPY1_START_4)):
        with BuildLine():
            Line((10, -53.844505579), (10, 60))
            ThreePointArc((10, 60), (7.071067812, 67.071067812), (0, 70))
            ThreePointArc((0, 70), (-7.071067812, 67.071067812), (-10, 60))
            Line((-10, 60), (-10, -53.844505579))
            ThreePointArc((-10, -53.844505579), (0, -51), (10, -53.844505579))
        make_face()
        with Locations((0, -30.34)):
            Circle(BODY_MOVE_COPY1_5_OUTLINE_R, mode=Mode.SUBTRACT)
        with Locations((0, -23.34)):
            Circle(BODY_MOVE_COPY1_5_OUTLINE_R, mode=Mode.SUBTRACT)
        with BuildLine():
            Line((-5.2, -13.14), (-5.2, 63.5))
            ThreePointArc((-5.2, 63.5), (-3.5, 65.2), (-1.8, 63.5))
            Line((-1.8, 63.5), (-1.8, -13.14))
            ThreePointArc((-1.8, -13.14), (-3.5, -14.84), (-5.2, -13.14))
        make_face(mode=Mode.SUBTRACT)
        with BuildLine():
            Line((1.8, -13.14), (1.8, 63.5))
            ThreePointArc((1.8, 63.5), (3.5, 65.2), (5.2, 63.5))
            Line((5.2, 63.5), (5.2, -13.14))
            ThreePointArc((5.2, -13.14), (3.5, -14.84), (1.8, -13.14))
        make_face(mode=Mode.SUBTRACT)
    extrude(amount=BODY_MOVE_COPY1_5_DEPTH)

    # Body-Move_Copy1 6 outline → Body-Move_Copy1 6 (revolve, cut)
    with BuildSketch(Plane(origin=(0, -30.34, 4), x_dir=(0, 1, 0), z_dir=(0, 0, -1))):
        Polygon((0.8, -4.8), (0, -4.319311505), (0, -10), (0.8, -10), align=None)
        Polygon((0, 10), (0, 4.319311505), (0.8, 4.8), (0.8, 10), align=None)
    revolve(axis=Axis((0, -30.34, 4), (1, 0, 0)), mode=Mode.SUBTRACT)

    # Body-Move_Copy1 7 outline → Body-Move_Copy1 7 (revolve, cut)
    with BuildSketch(Plane(origin=(0, -23.34, 4), x_dir=(0, 1, 0), z_dir=(0, 0, -1))):
        Polygon((0.8, -4.8), (0, -4.319311505), (0, -10), (0.8, -10), align=None)
        Polygon((0, 10), (0, 4.319311505), (0.8, 4.8), (0.8, 10), align=None)
    revolve(axis=Axis((0, -23.34, 4), (1, 0, 0)), mode=Mode.SUBTRACT)

    # Sketch40 → Cut-Extrude5 (cut)
    with BuildSketch(Plane(origin=(0, 0, 0), x_dir=(1, 0, 0), z_dir=(0, 0, -1))):
        with BuildLine():
            Line((-12.742776356, 67.426743165), (-10, 53.844505579))
            ThreePointArc((-10, 53.844505579), (0, 51), (10, 53.844505579))
            Line((10, 53.844505579), (12.742776356, 67.426743165))
            ThreePointArc((12.742776356, 67.426743165), (0, 83), (-12.742776356, 67.426743165))
        make_face()
    extrude(amount=CUT_EXTRUDE5_DEPTH, mode=Mode.SUBTRACT)


with BuildPart() as body_2_2_2:
    add(body_2_2_1.part)

    add(body_4.part)  # Boss-Extrude11 merges body 4
    # Boss-Extrude11: read off the stored shape, not the designer's step
    # Boss-Extrude11 outline → Boss-Extrude11 (add)
    with BuildSketch(Plane.XY):
        with BuildLine():
            ThreePointArc((-10, -61.693376137), (0, -57), (10, -61.693376137))
            Line((10, -61.693376137), (10, -58.819660113))
            ThreePointArc((10, -58.819660113), (0, -55), (-10, -58.819660113))
            Line((-10, -58.819660113), (-10, -61.693376137))
        make_face()
    extrude(amount=BOSS_EXTRUDE11_DEPTH)

    # Sketch44 → Cut-Extrude6 (cut)
    with BuildSketch(Plane.XY.offset(8)):
        Polygon((3.798964771, -70), (1.899482386, -66.71), (-1.899482386, -66.71), (-3.798964771, -70), (-1.899482386, -73.29), (1.899482386, -73.29), align=None)
    extrude(amount=-CUT_EXTRUDE6_DEPTH, mode=Mode.SUBTRACT)


with BuildPart() as body_2_2_3:
    # Body-Move/Copy3: moved
    add(body_2_2_2.part.rotate(Axis((0, -70, 0), (0, 0, 1)), BODY_MOVE_COPY3_ANGLE))

    # Boss-Extrude14: up to this plane
    boss_extrude14_end = Plane(origin=(0.839061186, -0.169438737, -39.320806191), z_dir=(-0.9802135658563201, 0.1979428334424811, 0))
    # Sketch46 → Boss-Extrude14 (add, up to the surface)
    with BuildSketch(Plane(origin=(2.122627486, -0.374276496, 0), x_dir=(-0.17364817766692428, -0.9848077530122092, 1.2297632139214586e-15), z_dir=(-0.9848077530122092, 0.17364817766692428, 0)), mode=Mode.PRIVATE) as boss_extrude14_sk1:
        with Locations((64.057695957, 4)):
            Rectangle(SKETCH46_W, SKETCH46_H)
    boss_extrude14_tool1 = split(extrude(boss_extrude14_sk1.sketch, amount=BOSS_EXTRUDE14_REACH, mode=Mode.PRIVATE), bisect_by=boss_extrude14_end, keep=Keep.BOTH, mode=Mode.PRIVATE)
    add(boss_extrude14_tool1.solids().sort_by_distance((-9.000875, -63.458792, 4))[0])

    # Boss-Extrude14 direction 2: up to this cylinder (the profile starts outside it)
    boss_extrude14_direction_2_end = Plane(origin=(0, -70, 4), z_dir=(0, 0, -1)) * Cylinder(BOSS_EXTRUDE14_DIRECTION_2_END_RADIUS, 452.862, mode=Mode.PRIVATE)
    # Sketch46 → Boss-Extrude14 direction 2 (add, up to the surface)
    with BuildSketch(Plane(origin=(2.122627486, -0.374276496, 0), x_dir=(-0.17364817766692428, -0.9848077530122092, 1.2297632139214586e-15), z_dir=(-0.9848077530122092, 0.17364817766692428, 0)), mode=Mode.PRIVATE) as boss_extrude14_direction_2_sk1:
        with Locations((64.057695957, 4)):
            Rectangle(SKETCH46_W, SKETCH46_H)
    boss_extrude14_direction_2_tool1 = extrude(boss_extrude14_direction_2_sk1.sketch, amount=-BOSS_EXTRUDE14_DIRECTION_2_REACH, mode=Mode.PRIVATE) - boss_extrude14_direction_2_end
    add(boss_extrude14_direction_2_tool1.solids().sort_by_distance((-9.000875, -63.458792, 4))[0])


with BuildPart() as body_2_2_4:
    # Body-Move/Copy4: moved
    add(body_2_2_3.part.rotate(Axis((0, -70, 0), (0, 0, 1)), BODY_MOVE_COPY4_ANGLE))


solid = part_1.part
